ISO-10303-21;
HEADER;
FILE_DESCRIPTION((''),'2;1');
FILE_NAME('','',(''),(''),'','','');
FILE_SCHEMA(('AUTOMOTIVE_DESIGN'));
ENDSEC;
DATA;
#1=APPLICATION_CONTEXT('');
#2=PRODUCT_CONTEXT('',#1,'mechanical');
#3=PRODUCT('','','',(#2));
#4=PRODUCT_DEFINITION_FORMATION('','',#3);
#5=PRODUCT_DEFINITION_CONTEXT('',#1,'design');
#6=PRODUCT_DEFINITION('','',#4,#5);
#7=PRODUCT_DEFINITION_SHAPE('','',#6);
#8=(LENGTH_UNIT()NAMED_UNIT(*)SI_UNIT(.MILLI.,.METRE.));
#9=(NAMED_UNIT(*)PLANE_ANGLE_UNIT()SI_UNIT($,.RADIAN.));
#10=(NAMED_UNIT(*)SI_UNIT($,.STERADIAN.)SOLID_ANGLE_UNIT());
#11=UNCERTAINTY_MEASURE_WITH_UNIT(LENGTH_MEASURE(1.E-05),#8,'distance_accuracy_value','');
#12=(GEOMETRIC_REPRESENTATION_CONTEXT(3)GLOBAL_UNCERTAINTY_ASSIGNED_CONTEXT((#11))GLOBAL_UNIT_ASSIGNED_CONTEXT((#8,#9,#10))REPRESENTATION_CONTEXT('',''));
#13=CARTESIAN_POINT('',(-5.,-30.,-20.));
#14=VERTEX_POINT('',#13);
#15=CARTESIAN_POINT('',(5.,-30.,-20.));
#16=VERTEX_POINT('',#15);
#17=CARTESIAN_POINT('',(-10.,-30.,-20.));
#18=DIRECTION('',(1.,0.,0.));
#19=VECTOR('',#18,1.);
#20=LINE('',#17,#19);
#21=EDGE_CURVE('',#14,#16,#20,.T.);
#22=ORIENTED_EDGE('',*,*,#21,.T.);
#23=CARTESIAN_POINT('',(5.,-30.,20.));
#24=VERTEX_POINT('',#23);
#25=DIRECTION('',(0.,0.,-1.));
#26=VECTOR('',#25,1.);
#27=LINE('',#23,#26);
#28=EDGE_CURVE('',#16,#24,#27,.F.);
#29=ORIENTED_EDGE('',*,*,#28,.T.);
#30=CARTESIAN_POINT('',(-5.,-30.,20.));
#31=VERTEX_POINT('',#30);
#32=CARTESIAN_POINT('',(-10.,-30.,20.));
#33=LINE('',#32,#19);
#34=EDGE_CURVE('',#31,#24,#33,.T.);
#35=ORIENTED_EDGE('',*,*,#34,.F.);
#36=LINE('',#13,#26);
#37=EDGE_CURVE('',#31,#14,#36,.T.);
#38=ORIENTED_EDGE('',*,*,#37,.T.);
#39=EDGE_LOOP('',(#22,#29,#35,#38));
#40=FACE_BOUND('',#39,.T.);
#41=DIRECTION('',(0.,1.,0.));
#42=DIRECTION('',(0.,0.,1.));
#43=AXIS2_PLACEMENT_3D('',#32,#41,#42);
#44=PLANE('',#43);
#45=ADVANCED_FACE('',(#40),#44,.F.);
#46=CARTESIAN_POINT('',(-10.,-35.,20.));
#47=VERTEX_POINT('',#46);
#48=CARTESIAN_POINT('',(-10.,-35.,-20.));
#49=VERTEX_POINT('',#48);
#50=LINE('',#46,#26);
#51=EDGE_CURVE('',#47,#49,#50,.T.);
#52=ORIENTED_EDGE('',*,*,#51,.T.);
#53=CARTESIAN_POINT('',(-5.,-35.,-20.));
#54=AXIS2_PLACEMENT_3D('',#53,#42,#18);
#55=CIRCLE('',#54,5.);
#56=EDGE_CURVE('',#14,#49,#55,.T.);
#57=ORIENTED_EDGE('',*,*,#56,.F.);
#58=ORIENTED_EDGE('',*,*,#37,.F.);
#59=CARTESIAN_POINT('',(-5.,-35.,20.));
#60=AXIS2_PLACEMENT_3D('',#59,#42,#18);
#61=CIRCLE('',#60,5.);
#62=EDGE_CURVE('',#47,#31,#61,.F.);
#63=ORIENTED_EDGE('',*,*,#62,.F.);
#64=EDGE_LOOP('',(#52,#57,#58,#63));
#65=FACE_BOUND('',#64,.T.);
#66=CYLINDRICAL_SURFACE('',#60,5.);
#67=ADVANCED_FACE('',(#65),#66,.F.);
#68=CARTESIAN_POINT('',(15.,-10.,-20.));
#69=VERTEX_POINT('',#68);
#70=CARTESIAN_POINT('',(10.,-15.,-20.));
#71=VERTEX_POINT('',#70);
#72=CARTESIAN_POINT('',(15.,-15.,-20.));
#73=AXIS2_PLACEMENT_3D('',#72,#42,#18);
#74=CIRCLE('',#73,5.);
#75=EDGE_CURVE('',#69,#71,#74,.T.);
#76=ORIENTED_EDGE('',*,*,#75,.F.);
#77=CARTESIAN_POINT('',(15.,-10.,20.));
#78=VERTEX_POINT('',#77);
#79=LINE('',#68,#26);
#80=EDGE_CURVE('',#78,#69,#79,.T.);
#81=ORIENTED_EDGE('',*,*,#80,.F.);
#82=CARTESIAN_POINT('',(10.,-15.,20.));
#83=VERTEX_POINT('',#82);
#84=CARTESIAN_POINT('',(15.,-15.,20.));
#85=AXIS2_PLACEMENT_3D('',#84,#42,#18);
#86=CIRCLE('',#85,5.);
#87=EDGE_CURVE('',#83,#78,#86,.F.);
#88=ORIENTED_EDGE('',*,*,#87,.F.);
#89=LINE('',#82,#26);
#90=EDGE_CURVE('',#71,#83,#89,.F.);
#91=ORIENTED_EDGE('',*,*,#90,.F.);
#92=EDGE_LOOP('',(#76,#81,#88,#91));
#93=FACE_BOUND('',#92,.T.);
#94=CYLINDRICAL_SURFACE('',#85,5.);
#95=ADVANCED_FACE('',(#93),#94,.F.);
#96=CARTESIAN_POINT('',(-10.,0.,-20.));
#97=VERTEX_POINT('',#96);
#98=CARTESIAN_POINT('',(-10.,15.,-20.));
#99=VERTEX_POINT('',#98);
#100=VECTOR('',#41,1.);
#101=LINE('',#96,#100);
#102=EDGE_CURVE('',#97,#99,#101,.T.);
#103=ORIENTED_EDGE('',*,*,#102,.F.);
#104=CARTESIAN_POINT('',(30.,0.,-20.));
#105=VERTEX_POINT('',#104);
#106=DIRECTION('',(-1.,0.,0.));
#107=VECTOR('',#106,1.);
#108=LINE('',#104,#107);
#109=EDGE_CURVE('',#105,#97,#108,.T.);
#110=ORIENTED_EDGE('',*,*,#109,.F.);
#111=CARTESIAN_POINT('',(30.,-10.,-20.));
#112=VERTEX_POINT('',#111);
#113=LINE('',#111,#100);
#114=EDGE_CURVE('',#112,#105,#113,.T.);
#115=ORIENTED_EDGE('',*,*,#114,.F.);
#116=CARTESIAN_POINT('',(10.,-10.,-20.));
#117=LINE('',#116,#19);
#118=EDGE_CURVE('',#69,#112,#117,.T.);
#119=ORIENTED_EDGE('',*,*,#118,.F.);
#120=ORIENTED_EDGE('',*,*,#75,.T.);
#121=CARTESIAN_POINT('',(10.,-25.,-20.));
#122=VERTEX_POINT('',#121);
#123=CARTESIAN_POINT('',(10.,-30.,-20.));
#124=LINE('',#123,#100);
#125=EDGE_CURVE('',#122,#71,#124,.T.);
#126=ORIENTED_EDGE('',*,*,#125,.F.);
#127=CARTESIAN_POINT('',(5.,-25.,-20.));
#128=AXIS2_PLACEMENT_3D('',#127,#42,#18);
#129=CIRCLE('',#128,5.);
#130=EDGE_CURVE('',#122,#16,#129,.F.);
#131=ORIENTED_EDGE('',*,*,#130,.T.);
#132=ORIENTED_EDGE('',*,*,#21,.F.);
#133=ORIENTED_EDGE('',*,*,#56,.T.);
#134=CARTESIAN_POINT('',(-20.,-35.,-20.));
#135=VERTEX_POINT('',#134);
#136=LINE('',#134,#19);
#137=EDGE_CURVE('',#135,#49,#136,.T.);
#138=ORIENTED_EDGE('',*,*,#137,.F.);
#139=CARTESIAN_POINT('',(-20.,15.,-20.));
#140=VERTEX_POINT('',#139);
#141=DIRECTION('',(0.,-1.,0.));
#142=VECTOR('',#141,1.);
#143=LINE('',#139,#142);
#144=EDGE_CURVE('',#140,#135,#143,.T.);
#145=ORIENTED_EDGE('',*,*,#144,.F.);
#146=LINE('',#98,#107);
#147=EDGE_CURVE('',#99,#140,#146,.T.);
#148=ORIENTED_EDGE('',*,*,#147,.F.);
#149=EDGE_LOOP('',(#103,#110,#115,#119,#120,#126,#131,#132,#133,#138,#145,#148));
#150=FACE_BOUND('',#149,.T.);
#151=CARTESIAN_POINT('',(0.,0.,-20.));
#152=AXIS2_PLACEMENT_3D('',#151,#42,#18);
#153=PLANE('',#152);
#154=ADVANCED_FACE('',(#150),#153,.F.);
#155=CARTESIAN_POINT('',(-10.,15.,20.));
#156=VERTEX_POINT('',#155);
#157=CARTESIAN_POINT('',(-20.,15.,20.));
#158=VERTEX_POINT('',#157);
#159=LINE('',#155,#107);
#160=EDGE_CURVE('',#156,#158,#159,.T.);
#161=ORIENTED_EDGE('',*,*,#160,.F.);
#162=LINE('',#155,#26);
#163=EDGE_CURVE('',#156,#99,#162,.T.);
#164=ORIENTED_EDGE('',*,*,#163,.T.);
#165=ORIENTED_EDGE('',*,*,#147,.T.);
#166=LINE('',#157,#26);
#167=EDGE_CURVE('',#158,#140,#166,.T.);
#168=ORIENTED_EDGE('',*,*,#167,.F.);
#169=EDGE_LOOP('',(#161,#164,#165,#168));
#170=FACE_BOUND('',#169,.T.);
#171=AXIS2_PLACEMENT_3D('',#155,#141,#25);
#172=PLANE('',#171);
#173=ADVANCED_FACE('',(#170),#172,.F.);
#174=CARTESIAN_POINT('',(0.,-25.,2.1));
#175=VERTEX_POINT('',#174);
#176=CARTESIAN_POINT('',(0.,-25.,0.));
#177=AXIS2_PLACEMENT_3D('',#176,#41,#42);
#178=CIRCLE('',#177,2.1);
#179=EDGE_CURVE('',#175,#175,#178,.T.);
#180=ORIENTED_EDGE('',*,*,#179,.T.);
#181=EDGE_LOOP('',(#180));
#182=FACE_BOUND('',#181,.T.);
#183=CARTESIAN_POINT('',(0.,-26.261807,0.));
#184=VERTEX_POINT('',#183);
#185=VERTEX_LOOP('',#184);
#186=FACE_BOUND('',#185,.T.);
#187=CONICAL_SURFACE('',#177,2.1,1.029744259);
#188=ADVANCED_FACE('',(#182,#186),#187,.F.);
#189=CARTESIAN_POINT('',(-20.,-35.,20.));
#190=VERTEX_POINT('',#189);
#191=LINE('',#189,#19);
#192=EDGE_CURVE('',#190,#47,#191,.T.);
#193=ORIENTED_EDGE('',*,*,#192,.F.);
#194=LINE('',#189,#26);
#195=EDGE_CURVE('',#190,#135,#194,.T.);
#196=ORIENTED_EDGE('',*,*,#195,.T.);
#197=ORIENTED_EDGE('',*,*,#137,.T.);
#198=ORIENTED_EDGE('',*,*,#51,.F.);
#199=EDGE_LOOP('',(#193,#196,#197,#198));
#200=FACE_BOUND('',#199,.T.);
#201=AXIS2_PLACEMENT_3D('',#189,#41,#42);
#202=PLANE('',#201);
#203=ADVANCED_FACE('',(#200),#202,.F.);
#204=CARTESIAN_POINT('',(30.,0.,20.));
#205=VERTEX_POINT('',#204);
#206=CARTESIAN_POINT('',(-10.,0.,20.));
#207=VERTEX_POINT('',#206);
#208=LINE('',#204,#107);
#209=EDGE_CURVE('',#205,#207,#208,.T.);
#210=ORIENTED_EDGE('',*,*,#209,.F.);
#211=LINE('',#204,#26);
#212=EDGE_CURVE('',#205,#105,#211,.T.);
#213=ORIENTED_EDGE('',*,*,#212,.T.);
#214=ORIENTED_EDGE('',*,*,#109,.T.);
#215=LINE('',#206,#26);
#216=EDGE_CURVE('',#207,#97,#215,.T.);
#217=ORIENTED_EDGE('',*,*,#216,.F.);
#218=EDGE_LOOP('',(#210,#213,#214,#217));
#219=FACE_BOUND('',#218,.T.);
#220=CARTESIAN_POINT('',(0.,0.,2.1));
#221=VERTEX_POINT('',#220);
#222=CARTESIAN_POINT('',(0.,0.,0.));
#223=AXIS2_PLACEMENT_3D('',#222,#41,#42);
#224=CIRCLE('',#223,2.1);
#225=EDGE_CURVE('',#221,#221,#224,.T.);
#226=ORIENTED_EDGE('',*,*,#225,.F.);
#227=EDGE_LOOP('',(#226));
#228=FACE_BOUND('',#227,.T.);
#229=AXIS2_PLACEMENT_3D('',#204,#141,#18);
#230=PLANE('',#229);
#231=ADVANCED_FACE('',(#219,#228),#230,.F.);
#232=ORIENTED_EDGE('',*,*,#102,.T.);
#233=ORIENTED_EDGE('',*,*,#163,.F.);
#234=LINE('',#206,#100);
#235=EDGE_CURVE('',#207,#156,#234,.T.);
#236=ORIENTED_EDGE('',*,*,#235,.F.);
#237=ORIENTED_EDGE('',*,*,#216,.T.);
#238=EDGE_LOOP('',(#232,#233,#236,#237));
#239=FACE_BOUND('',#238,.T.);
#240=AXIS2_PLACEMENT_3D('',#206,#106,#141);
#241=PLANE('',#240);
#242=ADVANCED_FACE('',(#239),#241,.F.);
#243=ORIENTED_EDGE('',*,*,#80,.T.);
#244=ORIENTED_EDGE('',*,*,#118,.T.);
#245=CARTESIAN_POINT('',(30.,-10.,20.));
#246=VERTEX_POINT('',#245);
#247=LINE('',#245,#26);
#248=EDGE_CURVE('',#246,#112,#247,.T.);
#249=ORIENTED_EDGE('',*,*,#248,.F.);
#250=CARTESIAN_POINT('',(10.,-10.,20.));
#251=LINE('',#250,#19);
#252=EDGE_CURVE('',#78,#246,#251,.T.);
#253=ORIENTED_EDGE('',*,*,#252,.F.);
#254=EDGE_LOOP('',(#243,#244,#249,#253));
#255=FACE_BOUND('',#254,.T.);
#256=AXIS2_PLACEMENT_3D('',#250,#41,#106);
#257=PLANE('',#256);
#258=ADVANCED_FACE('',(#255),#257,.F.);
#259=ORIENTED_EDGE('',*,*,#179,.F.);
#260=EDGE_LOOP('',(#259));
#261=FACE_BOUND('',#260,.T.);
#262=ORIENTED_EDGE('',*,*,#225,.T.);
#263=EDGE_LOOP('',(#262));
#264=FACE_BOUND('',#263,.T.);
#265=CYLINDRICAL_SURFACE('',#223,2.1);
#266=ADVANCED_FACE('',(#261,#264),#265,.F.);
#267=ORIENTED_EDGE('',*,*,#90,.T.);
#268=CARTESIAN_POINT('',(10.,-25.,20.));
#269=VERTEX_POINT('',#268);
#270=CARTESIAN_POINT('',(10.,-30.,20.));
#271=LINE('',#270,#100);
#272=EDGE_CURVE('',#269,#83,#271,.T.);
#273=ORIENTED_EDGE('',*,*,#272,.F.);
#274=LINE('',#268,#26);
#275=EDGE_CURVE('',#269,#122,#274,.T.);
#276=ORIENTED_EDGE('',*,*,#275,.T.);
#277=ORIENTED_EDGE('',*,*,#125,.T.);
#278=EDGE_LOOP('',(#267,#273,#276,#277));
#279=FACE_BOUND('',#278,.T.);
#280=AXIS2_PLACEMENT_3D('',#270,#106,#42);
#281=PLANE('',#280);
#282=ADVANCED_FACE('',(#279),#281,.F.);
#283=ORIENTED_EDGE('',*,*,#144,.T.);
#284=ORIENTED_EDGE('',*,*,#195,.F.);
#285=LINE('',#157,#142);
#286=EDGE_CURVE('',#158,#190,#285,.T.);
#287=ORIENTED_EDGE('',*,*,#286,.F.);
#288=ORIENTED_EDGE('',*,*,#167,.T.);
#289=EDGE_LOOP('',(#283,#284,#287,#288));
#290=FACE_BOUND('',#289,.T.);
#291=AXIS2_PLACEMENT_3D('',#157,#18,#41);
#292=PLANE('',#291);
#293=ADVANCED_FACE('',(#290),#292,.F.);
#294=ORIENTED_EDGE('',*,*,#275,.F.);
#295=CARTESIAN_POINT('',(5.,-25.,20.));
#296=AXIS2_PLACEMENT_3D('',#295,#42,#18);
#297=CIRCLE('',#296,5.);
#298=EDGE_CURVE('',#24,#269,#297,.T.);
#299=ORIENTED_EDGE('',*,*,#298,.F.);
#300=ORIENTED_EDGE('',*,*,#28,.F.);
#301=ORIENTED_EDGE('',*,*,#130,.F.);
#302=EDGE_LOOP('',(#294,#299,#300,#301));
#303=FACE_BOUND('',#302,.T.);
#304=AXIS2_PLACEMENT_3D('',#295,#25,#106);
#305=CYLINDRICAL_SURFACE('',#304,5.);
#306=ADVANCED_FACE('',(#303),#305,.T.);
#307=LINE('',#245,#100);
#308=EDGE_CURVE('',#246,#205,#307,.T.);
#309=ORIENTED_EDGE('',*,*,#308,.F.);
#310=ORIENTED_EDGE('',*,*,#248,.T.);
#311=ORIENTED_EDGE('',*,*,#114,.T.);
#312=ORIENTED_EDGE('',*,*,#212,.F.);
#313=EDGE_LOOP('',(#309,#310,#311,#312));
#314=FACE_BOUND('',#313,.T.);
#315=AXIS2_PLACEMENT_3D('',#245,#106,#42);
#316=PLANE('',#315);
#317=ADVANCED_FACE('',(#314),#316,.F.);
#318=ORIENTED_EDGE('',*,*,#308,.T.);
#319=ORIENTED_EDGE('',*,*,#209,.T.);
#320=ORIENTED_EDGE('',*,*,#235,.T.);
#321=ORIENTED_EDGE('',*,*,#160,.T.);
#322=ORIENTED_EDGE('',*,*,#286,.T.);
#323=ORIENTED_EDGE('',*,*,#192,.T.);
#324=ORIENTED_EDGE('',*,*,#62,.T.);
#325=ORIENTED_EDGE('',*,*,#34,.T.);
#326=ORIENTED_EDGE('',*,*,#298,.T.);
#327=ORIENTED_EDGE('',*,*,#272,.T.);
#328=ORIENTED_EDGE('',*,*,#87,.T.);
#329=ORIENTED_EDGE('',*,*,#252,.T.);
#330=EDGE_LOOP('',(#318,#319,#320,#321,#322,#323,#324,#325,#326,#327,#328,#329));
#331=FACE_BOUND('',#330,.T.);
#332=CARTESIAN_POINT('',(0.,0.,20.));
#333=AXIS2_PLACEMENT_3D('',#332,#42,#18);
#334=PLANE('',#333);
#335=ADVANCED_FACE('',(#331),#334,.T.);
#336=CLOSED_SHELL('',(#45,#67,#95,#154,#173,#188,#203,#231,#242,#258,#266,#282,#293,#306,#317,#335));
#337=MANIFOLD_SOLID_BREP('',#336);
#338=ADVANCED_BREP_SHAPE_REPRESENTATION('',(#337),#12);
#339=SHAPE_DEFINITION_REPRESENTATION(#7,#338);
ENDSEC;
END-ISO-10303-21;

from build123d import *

# Parameters (mm, degrees)
BOSS_EXTRU_1_DEPTH    = 20
CONG_1_R              = 5
TROU_TARAUD_M51_D     = 4.2
TROU_TARAUD_M51_DEPTH = 25
TROU_TARAUD_M51_TIP   = 1.2618073


with BuildPart() as part:
    # Esquisse1 → Boss.-Extru.1 (new, symmetric)
    with BuildSketch(Plane.XY):
        Polygon((-20, 15), (-20, -35), (-10, -35), (-10, -30), (10, -30), (10, -10), (30, -10), (30, 0), (-10, 0), (-10, 15), align=None)
    extrude(amount=BOSS_EXTRU_1_DEPTH, both=True)

    # Congé1
    cong_1_edges = [part.edges().sort_by_distance(p)[0] for p in [
        (-10, -30, 0),
        (10, -10, 0),
        (10, -30, 0),
    ]]
    fillet(cong_1_edges, radius=CONG_1_R - 0.0001)  # a hair under: the kernel refuses the full size

    # Trou taraudé M51
    with Locations(Plane(origin=(0, 0, 0), x_dir=(1, 0, 0), z_dir=(0, 1, 0))):
        with Locations((0, 0)):
            Hole(TROU_TARAUD_M51_D / 2, depth=TROU_TARAUD_M51_DEPTH)
            with Locations((0, 0, -(TROU_TARAUD_M51_DEPTH + TROU_TARAUD_M51_TIP / 2))):  # 118° drill point
                Cone(0, TROU_TARAUD_M51_D / 2, TROU_TARAUD_M51_TIP, mode=Mode.SUBTRACT)


solid = part.part
